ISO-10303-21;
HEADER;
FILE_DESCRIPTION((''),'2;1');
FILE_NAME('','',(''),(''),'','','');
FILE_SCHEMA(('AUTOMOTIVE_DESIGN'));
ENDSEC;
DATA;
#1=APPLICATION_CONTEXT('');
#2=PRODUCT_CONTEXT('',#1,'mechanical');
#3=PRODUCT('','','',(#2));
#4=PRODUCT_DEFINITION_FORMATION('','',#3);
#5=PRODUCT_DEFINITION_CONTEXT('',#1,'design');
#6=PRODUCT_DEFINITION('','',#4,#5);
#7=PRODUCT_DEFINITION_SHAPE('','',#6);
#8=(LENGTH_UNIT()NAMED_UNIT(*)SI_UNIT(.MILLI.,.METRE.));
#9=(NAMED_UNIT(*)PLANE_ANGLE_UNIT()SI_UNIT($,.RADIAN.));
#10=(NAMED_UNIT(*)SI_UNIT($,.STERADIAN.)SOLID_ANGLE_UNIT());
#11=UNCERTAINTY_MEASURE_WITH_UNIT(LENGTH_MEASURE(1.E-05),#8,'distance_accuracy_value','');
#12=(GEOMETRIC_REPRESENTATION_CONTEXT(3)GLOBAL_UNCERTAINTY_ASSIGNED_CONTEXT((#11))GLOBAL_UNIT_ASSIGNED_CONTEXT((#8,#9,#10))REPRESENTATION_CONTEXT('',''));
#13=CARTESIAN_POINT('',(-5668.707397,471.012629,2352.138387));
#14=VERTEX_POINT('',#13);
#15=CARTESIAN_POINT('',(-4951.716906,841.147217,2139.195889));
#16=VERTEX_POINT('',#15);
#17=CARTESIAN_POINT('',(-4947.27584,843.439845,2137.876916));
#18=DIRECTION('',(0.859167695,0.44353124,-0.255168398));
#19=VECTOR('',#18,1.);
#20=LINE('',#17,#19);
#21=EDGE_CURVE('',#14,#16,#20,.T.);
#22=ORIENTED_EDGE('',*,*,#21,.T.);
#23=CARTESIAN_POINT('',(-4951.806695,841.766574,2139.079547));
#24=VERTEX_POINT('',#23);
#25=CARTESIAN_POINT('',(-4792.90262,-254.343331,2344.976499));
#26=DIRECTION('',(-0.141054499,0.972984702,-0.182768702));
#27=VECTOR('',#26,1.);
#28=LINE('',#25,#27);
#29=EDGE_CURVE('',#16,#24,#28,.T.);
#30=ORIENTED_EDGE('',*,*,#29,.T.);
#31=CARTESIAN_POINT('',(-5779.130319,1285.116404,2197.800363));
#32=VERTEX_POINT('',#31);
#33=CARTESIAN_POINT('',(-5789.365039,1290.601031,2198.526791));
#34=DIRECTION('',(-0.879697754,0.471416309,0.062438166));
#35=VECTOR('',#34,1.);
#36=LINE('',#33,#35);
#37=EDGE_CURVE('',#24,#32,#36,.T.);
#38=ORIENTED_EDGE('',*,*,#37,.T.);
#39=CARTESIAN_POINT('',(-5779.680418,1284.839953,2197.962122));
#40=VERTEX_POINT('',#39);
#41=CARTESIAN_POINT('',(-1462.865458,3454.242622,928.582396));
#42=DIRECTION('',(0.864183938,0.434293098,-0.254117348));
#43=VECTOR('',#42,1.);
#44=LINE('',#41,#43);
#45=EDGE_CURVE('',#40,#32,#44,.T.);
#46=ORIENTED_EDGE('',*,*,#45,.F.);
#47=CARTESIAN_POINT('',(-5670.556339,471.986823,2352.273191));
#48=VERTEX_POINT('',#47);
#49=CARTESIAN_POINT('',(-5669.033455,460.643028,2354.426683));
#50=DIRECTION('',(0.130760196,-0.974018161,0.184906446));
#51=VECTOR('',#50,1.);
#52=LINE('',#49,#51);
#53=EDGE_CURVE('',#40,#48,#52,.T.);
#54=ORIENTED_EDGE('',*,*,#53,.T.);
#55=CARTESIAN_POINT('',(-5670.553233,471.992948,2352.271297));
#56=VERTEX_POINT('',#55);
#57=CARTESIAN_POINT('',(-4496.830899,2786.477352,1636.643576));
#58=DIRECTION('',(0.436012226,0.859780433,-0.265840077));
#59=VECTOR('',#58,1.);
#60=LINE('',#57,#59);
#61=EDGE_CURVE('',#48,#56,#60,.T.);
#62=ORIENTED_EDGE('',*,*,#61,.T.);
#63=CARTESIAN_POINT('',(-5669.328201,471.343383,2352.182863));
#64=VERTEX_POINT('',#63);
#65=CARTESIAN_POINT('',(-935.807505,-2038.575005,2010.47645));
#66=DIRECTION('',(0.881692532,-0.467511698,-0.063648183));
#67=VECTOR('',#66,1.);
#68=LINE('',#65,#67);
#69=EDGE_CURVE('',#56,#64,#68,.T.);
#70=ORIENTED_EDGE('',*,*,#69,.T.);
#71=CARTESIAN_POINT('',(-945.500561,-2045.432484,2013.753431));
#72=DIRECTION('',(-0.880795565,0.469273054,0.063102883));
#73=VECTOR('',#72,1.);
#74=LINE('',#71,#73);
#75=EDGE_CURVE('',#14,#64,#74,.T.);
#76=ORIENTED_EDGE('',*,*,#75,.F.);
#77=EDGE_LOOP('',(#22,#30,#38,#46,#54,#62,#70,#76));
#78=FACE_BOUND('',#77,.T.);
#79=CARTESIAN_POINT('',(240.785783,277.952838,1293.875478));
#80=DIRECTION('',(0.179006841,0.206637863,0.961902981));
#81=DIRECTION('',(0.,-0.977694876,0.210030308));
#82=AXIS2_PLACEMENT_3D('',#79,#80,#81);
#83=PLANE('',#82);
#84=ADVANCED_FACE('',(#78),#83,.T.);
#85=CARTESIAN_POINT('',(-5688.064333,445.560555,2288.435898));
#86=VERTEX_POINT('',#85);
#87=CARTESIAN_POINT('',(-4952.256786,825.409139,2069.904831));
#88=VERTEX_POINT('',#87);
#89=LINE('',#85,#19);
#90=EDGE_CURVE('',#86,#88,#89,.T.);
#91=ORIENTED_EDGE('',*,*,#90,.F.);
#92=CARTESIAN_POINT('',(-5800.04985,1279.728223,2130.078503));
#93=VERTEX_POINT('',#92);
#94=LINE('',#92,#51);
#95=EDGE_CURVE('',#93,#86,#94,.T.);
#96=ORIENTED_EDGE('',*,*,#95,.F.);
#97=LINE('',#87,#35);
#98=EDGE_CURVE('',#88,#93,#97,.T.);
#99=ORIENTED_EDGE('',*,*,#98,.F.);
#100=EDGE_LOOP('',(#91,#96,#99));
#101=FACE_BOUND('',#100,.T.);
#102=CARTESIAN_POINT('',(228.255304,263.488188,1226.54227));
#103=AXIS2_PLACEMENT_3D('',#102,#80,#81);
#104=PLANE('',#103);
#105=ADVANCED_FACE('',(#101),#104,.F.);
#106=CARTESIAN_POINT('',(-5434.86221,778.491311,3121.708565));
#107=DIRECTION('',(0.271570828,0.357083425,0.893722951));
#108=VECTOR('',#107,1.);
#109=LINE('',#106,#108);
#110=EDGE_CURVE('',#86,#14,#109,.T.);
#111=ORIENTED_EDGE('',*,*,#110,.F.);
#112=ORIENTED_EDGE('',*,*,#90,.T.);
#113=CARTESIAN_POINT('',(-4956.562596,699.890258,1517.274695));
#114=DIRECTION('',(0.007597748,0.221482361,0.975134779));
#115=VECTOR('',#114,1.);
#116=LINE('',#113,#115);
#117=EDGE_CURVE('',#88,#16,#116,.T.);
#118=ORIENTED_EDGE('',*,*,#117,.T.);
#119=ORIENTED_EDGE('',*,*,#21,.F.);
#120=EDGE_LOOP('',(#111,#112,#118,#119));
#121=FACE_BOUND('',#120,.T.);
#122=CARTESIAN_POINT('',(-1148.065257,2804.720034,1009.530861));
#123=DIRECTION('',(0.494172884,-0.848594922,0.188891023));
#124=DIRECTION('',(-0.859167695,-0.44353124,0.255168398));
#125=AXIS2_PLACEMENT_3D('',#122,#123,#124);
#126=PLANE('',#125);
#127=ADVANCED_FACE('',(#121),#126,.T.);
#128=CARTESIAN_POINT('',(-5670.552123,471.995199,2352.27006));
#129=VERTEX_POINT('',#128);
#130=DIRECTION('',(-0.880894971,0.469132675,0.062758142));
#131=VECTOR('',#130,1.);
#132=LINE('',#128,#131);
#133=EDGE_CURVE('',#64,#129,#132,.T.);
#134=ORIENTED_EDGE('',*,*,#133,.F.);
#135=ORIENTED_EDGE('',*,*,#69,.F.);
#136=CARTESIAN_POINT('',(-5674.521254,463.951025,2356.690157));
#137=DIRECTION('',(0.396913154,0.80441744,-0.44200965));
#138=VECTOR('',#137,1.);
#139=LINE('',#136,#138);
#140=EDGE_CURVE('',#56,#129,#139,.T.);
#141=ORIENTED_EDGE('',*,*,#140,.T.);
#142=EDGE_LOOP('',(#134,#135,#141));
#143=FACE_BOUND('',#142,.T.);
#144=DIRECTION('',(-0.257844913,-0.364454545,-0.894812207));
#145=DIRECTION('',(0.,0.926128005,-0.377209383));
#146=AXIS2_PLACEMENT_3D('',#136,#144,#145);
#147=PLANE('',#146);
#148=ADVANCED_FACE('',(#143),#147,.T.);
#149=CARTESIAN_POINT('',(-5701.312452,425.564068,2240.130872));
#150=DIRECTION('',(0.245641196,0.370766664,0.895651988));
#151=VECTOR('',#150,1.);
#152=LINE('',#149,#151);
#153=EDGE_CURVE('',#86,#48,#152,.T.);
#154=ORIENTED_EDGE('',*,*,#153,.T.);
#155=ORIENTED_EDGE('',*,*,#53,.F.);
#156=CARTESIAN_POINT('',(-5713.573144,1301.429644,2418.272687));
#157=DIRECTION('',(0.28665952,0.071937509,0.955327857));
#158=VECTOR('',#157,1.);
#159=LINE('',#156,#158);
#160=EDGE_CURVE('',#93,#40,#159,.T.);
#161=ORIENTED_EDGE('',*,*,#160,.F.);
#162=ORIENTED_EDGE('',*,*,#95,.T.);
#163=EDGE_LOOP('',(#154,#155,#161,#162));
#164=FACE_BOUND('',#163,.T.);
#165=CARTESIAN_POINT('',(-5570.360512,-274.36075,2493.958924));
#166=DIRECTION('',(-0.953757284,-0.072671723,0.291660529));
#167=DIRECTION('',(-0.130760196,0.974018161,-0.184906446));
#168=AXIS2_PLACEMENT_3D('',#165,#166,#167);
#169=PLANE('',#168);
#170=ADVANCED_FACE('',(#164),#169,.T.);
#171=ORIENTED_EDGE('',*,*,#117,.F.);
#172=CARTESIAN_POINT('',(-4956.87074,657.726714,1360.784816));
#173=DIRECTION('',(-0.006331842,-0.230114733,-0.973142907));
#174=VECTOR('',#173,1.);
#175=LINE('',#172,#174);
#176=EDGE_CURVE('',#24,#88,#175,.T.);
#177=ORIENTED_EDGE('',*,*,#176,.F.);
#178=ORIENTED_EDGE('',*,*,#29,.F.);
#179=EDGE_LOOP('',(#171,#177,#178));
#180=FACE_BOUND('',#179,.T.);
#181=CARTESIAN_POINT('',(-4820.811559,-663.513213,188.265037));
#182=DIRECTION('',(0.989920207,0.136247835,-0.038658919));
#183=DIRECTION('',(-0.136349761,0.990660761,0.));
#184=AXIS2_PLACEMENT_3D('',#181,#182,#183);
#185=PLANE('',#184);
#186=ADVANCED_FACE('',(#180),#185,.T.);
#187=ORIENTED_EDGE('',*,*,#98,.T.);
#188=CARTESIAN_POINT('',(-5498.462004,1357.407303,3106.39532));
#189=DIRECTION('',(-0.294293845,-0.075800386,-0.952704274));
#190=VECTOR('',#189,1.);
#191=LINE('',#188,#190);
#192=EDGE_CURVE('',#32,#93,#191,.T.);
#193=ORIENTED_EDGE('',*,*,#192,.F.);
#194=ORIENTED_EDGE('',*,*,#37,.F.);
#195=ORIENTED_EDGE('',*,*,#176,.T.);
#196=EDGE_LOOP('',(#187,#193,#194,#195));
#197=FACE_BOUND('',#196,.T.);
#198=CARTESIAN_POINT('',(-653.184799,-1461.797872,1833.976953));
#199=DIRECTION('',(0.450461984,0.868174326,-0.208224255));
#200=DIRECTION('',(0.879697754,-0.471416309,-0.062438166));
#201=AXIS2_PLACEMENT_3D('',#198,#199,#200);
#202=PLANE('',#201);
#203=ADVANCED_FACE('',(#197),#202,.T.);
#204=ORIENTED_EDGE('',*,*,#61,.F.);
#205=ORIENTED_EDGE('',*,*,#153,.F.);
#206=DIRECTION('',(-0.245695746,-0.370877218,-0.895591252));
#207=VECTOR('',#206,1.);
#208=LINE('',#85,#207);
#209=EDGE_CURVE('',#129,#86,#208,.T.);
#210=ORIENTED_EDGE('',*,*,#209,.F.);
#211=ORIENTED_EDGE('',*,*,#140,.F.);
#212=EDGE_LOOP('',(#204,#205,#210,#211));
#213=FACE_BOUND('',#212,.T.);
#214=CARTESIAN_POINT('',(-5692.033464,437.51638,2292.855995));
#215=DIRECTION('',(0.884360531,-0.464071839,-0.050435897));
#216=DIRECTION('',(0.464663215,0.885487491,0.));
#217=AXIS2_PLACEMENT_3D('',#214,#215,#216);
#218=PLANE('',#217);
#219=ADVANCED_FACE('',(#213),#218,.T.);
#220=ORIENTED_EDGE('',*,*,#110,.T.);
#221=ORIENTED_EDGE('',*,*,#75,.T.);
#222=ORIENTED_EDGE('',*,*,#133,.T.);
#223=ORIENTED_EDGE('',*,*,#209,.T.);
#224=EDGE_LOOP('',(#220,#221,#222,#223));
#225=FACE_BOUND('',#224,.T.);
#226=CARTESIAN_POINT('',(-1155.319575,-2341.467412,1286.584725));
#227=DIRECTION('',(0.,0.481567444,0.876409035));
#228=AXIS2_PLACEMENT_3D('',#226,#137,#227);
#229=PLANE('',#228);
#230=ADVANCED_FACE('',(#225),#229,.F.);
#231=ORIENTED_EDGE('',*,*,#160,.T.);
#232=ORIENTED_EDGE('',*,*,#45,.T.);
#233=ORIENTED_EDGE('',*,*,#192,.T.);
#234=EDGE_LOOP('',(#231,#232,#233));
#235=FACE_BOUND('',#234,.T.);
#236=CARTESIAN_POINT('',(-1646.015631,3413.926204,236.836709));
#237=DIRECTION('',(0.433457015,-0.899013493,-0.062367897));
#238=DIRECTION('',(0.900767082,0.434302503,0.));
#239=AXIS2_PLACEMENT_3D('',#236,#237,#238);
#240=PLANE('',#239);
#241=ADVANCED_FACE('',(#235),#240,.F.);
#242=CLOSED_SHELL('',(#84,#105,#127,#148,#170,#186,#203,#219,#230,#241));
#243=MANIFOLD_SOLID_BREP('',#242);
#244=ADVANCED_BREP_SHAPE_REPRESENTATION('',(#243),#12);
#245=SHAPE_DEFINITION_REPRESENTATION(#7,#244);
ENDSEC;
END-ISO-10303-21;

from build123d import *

# Parameters (mm, degrees)
BOSS_EXTRUDE1_DEPTH = 70
CHAMFER1_SIZE2      = 4.18941816
CHAMFER1_SIZE       = 70
CHAMFER2_SIZE       = 6.666257335
CHAMFER2_SIZE_2     = 70
CUT_EXTRUDE1_DEPTH  = 10
CUT_EXTRUDE2_DEPTH  = 10
SKETCH4_W           = 287.422720902
SKETCH4_H           = 893.518312169
CUT_EXTRUDE3_DEPTH  = 10


# Some blends are built 0.0001 mm under size
with BuildPart() as part:
    # Sketch1 → Boss-Extrude1 (new body)
    with BuildSketch(Plane(origin=(231.948409601, 267.750179411, 1224.939426156), x_dir=(0.9836670614243895, -0.018848869033306223, -0.17900791157061058), z_dir=(0.17900684147746093, 0.20663786272562784, 0.9619029807586875))):
        Polygon((-6114.579700227, 916.675736405), (-6017.047344534, 65.828535372), (-5261.298623968, 468.69003921), align=None)
    extrude(amount=BOSS_EXTRUDE1_DEPTH)

    # Chamfer1
    chamfer1_edges = [part.edges().sort_by_distance(p)[0] for p in [
        (-5363.622839272, 1067.033331681, 2167.324875996),
    ]]
    chamfer1_side = [part.faces().sort_by_distance(p)[0] for p in [
        (-5363.637837962, 1067.016017832, 2167.24427972),
    ]]
    chamfer(chamfer1_edges, length=CHAMFER1_SIZE - 0.0001, length2=CHAMFER1_SIZE2 - 0.0001, reference=chamfer1_side[0])  # a hair under: the kernel refuses the full size

    # Chamfer2
    # the kernel refuses this chamfer: 70, 6.666257335 mm, written as the material it takes off along each edge
    with BuildSketch(Plane(origin=(-5831.876326045, 379.315966254, 2402.202019272), x_dir=(-0.37796472427930605, 0.8862370425990936, 0.267818168774414), z_dir=(0.8591676949824762, 0.4435312395800335, -0.255168398151295))) as chamfer2_piece_1:
        Polygon((CHAMFER2_SIZE * 0.92779638202, -CHAMFER2_SIZE * 0.373086951719), (-CHAMFER2_SIZE_2 * 0.373086951713, -CHAMFER2_SIZE_2 * 0.927796382005), (0, 0), align=None)
    extrude(amount=1215.290815937, mode=Mode.SUBTRACT)
    with BuildSketch(Plane(origin=(-5810.651127776, 1466.498755071, 2164.701368848), x_dir=(-0.1825618043812556, -0.20697447902057858, -0.9611621885068203), z_dir=(0.13076019619656676, -0.9740181607293223, 0.184906445696475))) as chamfer2_piece_2:
        Polygon((CHAMFER2_SIZE_2 * 0.999993350078, CHAMFER2_SIZE_2 * 0.00364688918346), (-CHAMFER2_SIZE * 0.00364688918357, CHAMFER2_SIZE * 0.999993350094), (0, 0), align=None)
    extrude(amount=1215.290815937, mode=Mode.SUBTRACT)

    # Sketch2 → Cut-Extrude1 (cut)
    with BuildSketch(Plane(origin=(-1155.31957462, -2341.467412338, 1286.584724908), x_dir=(0.9178561698216066, -0.3478582739738773, 0.1911404529353356), z_dir=(-0.39691315362483304, -0.8044174401239645, 0.4420096497860625))):
        Polygon((-4919.324722598, 2288.84825515), (-4917.313875734, 2288.259664395), (-4938.404193289, 2220.173354917), align=None)
    extrude(amount=CUT_EXTRUDE1_DEPTH, mode=Mode.SUBTRACT)

    # Sketch3 → Cut-Extrude2 (cut)
    with BuildSketch(Plane(origin=(-4820.811559407, -663.513212633, 188.265036569), x_dir=(-0.038297874166628845, -0.005271134374818051, -0.9992524645837606), z_dir=(0.9899202066384638, 0.1362478347188717, -0.03865891906507896))):
        Polygon((-2346.226398356, 930.896979041), (-1894.241052266, 2187.396241778), (-1814.981817773, 1495.770397412), align=None)
    extrude(amount=CUT_EXTRUDE2_DEPTH, mode=Mode.SUBTRACT)

    # Sketch4 → Cut-Extrude3 (cut)
    with BuildSketch(Plane(origin=(-1646.015630594, 3413.926203867, 236.836708654), x_dir=(0.9011742428578655, 0.43241771341973545, 0.029998418798336916), z_dir=(-0.43345701518092067, 0.8990134934757245, 0.06236789670191585))):
        with Locations((-4715.577586911, -1688.111490452)):
            Rectangle(SKETCH4_W, SKETCH4_H)
    extrude(amount=CUT_EXTRUDE3_DEPTH, mode=Mode.SUBTRACT)


solid = part.part
